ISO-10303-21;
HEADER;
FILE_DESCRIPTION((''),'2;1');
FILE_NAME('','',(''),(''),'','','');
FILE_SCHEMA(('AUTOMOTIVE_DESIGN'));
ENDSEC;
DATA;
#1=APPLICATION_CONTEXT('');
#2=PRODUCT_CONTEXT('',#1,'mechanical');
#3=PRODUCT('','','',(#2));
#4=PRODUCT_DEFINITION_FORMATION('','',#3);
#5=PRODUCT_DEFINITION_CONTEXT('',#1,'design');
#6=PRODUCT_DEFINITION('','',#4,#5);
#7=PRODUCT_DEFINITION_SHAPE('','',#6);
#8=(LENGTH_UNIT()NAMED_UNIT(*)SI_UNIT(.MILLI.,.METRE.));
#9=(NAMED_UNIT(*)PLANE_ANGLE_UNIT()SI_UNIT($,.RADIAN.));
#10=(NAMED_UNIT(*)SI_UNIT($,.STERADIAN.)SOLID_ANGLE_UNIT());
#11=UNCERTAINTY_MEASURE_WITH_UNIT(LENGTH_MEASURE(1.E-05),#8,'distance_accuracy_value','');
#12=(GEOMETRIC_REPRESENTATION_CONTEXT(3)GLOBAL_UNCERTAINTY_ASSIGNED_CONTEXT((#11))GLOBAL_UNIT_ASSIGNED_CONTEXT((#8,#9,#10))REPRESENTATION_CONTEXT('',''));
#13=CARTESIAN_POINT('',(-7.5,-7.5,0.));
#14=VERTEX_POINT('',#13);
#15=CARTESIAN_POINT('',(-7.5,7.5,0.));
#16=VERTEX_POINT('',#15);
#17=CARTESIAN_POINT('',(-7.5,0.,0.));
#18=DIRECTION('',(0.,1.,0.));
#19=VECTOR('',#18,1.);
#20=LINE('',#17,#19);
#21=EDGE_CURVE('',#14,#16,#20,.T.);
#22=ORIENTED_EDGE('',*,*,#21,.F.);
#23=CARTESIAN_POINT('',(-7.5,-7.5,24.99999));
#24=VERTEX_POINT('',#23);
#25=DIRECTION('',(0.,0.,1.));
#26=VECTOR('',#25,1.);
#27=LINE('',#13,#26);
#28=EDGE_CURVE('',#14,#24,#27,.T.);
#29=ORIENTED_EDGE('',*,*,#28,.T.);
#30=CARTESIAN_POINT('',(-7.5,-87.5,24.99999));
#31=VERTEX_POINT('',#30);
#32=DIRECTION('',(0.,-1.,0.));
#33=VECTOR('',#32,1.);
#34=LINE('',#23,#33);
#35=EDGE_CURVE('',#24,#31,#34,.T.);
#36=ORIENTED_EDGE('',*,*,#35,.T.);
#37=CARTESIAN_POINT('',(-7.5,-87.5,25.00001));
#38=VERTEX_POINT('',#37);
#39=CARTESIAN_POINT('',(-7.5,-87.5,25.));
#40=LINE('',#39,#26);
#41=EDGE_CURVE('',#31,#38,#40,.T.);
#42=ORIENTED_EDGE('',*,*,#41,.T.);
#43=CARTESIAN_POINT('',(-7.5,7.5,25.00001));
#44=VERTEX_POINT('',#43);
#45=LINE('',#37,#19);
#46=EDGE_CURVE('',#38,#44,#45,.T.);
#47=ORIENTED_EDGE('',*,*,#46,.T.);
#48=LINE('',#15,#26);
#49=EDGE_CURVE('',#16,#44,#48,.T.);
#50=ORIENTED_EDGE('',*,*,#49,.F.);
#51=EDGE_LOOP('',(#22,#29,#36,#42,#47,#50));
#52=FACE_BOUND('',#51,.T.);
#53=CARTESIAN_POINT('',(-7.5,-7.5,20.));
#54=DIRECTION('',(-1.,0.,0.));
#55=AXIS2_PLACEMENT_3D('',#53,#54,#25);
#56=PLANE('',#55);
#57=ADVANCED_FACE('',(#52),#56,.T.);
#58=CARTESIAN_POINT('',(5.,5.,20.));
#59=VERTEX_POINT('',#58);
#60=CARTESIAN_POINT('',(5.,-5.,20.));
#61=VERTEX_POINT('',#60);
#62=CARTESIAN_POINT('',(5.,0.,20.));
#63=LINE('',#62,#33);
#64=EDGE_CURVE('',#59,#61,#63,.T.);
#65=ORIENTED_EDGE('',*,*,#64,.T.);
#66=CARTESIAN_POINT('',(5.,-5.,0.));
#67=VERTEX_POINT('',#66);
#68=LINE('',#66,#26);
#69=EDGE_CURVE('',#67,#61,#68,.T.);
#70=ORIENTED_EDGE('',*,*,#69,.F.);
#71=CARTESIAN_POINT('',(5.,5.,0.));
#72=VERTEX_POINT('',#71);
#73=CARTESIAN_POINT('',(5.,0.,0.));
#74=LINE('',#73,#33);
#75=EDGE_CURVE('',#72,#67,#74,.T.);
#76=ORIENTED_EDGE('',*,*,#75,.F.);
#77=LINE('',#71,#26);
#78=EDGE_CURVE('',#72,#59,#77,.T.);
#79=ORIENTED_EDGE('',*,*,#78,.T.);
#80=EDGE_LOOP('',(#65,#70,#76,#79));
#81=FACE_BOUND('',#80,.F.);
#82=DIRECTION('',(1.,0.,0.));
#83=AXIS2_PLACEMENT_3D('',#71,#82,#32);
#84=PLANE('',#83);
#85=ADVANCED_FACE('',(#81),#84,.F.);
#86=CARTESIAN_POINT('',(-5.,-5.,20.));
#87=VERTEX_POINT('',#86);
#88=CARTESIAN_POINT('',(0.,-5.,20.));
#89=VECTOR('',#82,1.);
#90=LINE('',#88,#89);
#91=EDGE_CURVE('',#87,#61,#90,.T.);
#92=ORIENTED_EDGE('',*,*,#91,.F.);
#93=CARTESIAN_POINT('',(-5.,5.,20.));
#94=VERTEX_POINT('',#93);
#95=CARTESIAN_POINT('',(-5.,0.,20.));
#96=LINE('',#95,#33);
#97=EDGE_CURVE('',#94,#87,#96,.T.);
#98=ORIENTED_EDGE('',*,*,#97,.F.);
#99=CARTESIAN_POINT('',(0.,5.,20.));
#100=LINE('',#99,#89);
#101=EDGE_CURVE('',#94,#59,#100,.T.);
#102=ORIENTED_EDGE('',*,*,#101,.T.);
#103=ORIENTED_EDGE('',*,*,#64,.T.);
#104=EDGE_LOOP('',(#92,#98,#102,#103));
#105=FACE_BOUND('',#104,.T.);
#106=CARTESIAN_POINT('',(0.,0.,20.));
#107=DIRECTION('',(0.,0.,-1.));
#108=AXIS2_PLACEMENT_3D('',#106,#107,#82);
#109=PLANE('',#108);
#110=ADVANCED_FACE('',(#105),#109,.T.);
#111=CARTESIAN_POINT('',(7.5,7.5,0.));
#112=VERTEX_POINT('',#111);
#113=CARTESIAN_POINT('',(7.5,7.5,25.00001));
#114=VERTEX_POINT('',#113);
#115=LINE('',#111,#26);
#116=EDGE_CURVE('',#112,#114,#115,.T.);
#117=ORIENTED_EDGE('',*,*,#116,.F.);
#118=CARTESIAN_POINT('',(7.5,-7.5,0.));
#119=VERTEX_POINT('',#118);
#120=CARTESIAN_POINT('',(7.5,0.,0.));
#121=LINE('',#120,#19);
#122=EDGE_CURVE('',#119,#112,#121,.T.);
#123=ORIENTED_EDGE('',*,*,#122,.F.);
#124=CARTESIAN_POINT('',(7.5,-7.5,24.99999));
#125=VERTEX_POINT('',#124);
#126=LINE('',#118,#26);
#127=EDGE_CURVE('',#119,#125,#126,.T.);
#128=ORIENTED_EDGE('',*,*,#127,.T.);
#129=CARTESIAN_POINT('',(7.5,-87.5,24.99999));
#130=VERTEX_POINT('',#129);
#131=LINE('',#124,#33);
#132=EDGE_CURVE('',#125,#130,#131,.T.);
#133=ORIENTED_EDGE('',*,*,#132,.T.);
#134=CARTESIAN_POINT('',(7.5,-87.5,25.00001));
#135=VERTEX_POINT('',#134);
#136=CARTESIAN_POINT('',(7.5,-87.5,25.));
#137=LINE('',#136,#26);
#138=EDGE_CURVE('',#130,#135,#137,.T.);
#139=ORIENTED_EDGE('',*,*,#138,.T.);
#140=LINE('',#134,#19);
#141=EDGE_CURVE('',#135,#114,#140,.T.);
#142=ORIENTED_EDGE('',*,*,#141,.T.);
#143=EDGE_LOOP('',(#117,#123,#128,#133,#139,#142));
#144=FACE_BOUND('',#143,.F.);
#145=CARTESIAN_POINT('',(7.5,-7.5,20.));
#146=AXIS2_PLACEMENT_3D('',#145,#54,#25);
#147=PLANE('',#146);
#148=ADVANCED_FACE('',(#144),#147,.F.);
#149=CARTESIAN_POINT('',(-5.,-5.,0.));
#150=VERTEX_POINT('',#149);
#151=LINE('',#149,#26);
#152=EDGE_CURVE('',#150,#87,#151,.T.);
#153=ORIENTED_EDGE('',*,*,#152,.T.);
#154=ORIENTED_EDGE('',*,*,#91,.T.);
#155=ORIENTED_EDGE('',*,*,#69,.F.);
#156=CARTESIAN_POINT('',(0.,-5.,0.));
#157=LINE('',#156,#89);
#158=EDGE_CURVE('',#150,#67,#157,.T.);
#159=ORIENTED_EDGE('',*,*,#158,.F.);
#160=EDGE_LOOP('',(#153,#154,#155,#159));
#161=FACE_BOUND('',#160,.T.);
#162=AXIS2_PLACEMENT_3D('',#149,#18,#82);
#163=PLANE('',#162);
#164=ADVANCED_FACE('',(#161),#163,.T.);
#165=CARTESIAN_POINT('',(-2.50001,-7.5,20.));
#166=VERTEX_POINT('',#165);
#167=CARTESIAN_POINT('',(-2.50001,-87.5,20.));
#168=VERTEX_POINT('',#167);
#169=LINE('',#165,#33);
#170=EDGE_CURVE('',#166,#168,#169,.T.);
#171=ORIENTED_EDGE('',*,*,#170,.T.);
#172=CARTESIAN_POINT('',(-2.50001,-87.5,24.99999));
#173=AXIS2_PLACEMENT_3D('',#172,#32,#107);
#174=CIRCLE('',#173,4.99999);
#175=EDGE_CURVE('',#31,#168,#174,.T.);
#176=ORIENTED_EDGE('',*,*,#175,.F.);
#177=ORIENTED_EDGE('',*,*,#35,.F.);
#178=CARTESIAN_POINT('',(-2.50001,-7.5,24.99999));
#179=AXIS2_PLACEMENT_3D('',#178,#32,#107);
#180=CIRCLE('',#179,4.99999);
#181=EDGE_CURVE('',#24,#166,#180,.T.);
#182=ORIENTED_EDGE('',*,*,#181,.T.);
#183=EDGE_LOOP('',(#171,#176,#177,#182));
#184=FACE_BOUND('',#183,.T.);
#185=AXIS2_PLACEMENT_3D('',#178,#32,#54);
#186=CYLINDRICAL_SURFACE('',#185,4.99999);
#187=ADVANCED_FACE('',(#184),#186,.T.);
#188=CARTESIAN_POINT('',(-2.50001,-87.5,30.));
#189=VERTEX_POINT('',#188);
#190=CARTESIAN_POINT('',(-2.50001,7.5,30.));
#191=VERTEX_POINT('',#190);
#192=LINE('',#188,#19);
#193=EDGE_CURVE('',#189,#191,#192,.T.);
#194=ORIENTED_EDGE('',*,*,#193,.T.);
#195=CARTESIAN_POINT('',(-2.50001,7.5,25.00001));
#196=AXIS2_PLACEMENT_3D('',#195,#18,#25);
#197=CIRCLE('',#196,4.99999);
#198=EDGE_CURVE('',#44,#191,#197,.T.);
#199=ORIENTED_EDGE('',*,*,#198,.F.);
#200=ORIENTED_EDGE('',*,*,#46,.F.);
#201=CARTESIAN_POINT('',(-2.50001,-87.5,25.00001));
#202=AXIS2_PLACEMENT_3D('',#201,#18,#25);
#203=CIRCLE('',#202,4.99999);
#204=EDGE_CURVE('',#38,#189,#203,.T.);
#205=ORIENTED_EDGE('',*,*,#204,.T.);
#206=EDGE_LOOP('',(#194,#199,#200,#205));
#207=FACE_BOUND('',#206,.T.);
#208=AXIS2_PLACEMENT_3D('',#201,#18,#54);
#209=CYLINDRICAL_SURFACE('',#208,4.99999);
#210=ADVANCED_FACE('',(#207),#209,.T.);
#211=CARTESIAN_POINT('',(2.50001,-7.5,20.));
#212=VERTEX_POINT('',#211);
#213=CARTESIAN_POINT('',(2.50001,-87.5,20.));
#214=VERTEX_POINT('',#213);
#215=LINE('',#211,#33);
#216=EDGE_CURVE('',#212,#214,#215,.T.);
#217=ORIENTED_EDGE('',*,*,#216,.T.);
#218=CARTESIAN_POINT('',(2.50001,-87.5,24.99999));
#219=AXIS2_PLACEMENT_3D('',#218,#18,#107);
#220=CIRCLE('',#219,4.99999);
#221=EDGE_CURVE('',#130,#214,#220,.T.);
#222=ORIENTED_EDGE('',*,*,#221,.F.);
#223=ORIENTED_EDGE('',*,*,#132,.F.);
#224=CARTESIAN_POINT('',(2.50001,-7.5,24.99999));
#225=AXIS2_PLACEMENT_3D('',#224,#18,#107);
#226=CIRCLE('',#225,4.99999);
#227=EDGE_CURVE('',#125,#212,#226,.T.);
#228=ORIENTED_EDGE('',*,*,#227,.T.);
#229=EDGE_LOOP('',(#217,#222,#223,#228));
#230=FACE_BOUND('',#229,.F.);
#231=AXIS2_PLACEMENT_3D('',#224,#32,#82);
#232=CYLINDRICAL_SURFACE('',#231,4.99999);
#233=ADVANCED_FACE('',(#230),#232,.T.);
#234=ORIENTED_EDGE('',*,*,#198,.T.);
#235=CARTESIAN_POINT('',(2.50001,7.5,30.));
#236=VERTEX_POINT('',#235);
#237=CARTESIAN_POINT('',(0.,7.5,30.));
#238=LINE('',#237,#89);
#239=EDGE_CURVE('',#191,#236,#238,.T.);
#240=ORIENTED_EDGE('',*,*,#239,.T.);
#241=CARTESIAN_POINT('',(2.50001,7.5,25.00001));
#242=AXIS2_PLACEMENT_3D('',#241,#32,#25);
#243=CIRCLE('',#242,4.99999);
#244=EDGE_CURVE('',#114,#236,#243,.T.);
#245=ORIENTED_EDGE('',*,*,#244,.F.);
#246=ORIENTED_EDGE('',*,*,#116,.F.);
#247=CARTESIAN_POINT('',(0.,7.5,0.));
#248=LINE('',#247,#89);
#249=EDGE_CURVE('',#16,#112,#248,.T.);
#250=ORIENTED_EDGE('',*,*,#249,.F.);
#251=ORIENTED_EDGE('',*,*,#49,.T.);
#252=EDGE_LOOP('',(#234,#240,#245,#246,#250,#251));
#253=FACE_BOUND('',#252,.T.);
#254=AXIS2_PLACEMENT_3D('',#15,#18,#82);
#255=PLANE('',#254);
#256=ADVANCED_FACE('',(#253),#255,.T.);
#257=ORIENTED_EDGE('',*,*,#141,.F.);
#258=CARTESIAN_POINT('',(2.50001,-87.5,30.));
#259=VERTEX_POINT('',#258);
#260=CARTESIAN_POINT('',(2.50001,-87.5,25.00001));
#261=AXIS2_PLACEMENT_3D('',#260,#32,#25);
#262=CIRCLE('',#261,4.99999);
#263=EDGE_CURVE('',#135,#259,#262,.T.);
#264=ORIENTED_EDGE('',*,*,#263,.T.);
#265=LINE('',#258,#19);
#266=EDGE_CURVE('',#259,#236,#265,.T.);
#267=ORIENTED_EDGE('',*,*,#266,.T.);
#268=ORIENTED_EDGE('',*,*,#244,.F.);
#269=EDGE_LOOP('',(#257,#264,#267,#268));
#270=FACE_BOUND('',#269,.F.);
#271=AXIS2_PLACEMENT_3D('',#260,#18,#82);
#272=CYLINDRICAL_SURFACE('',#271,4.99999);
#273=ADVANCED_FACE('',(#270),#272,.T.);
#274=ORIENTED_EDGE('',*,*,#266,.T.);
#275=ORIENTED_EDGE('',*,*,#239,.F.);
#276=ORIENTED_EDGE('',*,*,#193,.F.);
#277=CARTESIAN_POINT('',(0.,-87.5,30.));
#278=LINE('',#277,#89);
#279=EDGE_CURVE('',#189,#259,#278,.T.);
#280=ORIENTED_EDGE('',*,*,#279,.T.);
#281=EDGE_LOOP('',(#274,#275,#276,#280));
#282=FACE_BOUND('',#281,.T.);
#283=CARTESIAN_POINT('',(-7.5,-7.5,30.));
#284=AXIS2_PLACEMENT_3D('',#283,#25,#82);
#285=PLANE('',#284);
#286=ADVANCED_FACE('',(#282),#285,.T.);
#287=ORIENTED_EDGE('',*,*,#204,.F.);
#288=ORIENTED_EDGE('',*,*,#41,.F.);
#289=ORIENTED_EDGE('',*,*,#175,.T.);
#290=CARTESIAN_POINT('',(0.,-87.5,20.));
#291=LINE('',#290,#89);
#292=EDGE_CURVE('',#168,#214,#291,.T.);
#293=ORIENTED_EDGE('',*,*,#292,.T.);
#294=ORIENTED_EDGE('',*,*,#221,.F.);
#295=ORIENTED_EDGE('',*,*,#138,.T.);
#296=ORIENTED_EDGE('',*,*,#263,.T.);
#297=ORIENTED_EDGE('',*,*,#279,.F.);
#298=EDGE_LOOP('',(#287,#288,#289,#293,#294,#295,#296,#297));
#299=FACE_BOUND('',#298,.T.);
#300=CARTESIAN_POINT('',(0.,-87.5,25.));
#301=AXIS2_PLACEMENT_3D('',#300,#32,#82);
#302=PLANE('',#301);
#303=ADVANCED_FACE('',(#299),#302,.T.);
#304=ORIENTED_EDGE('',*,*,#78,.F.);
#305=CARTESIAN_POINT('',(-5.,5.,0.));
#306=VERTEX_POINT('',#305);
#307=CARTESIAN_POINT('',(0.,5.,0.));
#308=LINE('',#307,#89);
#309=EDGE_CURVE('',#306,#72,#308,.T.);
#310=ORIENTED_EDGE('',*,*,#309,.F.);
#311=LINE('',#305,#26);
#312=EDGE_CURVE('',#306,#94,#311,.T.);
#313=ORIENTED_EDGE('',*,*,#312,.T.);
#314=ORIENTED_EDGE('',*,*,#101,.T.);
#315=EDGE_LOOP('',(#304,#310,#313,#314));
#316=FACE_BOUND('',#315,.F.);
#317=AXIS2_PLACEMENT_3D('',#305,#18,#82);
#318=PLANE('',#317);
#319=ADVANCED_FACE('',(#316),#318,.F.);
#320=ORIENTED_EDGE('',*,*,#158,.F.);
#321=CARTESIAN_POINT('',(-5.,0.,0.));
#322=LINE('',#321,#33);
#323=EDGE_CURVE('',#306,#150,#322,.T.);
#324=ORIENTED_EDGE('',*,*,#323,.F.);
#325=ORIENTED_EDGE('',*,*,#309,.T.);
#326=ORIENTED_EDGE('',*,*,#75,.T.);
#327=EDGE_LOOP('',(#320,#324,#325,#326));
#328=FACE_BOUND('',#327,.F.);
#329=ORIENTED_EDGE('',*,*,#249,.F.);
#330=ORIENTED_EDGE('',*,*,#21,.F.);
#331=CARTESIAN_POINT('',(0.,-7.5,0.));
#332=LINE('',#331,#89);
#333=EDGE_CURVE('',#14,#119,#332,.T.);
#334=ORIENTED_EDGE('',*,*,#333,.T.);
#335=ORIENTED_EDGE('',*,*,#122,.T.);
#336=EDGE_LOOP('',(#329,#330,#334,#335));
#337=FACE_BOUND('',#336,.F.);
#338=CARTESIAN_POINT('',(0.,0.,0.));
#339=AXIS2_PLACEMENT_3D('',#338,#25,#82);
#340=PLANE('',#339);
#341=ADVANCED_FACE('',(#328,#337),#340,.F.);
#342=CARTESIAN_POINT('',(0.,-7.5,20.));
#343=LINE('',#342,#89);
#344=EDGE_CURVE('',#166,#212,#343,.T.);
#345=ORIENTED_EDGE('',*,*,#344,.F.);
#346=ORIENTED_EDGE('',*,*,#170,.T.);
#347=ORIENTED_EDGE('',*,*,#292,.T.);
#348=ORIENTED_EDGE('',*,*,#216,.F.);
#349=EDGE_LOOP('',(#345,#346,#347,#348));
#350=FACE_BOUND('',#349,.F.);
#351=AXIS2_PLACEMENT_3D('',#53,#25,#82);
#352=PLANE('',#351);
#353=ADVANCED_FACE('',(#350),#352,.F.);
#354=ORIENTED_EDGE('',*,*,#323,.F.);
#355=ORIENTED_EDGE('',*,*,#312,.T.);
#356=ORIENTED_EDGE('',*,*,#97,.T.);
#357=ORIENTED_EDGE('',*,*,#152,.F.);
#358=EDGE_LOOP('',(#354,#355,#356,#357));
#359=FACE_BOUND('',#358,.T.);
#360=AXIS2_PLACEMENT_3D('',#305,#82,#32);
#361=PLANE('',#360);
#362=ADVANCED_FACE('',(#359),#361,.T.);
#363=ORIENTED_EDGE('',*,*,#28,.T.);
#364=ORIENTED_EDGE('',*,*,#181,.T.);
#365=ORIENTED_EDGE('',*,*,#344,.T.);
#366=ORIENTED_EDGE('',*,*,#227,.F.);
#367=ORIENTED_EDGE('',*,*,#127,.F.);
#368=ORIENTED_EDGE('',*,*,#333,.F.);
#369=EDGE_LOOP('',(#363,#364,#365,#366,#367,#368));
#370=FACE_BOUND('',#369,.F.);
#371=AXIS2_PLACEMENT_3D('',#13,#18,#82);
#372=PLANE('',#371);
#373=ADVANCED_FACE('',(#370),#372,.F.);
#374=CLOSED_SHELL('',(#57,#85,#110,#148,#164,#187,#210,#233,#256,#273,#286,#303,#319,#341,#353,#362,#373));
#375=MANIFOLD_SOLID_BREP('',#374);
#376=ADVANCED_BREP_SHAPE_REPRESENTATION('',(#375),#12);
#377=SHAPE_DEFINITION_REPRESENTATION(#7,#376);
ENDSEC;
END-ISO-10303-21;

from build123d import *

# Parameters (mm, degrees)
F0_W     = 15
F0_H     = 15
F1_DEPTH = 30
F2_W     = 15
F2_H     = 10
F3_DEPTH = 80
F4_R     = 4.99999
F5_W     = 10
F5_H     = 10
F6_DEPTH = 20


# Not quite as in the source:
# - a fillet or chamfer is up to 0.001 mm smaller than in the source, because OpenCascade refuses the exact size


with BuildPart() as f1:
    # F0 (on Top) → F1 (new body)
    with BuildSketch(Plane.XY):
        Rectangle(F0_W, F0_H)
    extrude(amount=F1_DEPTH)

    # F2 (on face) → F3 (join)
    with BuildSketch(Plane.XZ.offset(7.5)):
        with Locations((0, 25)):
            Rectangle(F2_W, F2_H)
    extrude(amount=F3_DEPTH)

    # F4 (radius 5 in the source; OpenCascade refuses exactly that, so slightly less here)
    f4_edges = [f1.edges().sort_by_distance(p)[0] for p in [
        (7.5, -40, 30),
        (-7.5, -40, 30),
        (7.5, -47.5, 20),
        (-7.5, -47.5, 20),
    ]]
    fillet(f4_edges, radius=F4_R)

    # F5 (on face) → F6 (cut)
    with BuildSketch(Plane(origin=(0, 0, 0), x_dir=(1, 0, 0), z_dir=(0, 0, -1))):
        Rectangle(F5_W, F5_H)
    extrude(amount=-F6_DEPTH, mode=Mode.SUBTRACT)


solid = f1.part
